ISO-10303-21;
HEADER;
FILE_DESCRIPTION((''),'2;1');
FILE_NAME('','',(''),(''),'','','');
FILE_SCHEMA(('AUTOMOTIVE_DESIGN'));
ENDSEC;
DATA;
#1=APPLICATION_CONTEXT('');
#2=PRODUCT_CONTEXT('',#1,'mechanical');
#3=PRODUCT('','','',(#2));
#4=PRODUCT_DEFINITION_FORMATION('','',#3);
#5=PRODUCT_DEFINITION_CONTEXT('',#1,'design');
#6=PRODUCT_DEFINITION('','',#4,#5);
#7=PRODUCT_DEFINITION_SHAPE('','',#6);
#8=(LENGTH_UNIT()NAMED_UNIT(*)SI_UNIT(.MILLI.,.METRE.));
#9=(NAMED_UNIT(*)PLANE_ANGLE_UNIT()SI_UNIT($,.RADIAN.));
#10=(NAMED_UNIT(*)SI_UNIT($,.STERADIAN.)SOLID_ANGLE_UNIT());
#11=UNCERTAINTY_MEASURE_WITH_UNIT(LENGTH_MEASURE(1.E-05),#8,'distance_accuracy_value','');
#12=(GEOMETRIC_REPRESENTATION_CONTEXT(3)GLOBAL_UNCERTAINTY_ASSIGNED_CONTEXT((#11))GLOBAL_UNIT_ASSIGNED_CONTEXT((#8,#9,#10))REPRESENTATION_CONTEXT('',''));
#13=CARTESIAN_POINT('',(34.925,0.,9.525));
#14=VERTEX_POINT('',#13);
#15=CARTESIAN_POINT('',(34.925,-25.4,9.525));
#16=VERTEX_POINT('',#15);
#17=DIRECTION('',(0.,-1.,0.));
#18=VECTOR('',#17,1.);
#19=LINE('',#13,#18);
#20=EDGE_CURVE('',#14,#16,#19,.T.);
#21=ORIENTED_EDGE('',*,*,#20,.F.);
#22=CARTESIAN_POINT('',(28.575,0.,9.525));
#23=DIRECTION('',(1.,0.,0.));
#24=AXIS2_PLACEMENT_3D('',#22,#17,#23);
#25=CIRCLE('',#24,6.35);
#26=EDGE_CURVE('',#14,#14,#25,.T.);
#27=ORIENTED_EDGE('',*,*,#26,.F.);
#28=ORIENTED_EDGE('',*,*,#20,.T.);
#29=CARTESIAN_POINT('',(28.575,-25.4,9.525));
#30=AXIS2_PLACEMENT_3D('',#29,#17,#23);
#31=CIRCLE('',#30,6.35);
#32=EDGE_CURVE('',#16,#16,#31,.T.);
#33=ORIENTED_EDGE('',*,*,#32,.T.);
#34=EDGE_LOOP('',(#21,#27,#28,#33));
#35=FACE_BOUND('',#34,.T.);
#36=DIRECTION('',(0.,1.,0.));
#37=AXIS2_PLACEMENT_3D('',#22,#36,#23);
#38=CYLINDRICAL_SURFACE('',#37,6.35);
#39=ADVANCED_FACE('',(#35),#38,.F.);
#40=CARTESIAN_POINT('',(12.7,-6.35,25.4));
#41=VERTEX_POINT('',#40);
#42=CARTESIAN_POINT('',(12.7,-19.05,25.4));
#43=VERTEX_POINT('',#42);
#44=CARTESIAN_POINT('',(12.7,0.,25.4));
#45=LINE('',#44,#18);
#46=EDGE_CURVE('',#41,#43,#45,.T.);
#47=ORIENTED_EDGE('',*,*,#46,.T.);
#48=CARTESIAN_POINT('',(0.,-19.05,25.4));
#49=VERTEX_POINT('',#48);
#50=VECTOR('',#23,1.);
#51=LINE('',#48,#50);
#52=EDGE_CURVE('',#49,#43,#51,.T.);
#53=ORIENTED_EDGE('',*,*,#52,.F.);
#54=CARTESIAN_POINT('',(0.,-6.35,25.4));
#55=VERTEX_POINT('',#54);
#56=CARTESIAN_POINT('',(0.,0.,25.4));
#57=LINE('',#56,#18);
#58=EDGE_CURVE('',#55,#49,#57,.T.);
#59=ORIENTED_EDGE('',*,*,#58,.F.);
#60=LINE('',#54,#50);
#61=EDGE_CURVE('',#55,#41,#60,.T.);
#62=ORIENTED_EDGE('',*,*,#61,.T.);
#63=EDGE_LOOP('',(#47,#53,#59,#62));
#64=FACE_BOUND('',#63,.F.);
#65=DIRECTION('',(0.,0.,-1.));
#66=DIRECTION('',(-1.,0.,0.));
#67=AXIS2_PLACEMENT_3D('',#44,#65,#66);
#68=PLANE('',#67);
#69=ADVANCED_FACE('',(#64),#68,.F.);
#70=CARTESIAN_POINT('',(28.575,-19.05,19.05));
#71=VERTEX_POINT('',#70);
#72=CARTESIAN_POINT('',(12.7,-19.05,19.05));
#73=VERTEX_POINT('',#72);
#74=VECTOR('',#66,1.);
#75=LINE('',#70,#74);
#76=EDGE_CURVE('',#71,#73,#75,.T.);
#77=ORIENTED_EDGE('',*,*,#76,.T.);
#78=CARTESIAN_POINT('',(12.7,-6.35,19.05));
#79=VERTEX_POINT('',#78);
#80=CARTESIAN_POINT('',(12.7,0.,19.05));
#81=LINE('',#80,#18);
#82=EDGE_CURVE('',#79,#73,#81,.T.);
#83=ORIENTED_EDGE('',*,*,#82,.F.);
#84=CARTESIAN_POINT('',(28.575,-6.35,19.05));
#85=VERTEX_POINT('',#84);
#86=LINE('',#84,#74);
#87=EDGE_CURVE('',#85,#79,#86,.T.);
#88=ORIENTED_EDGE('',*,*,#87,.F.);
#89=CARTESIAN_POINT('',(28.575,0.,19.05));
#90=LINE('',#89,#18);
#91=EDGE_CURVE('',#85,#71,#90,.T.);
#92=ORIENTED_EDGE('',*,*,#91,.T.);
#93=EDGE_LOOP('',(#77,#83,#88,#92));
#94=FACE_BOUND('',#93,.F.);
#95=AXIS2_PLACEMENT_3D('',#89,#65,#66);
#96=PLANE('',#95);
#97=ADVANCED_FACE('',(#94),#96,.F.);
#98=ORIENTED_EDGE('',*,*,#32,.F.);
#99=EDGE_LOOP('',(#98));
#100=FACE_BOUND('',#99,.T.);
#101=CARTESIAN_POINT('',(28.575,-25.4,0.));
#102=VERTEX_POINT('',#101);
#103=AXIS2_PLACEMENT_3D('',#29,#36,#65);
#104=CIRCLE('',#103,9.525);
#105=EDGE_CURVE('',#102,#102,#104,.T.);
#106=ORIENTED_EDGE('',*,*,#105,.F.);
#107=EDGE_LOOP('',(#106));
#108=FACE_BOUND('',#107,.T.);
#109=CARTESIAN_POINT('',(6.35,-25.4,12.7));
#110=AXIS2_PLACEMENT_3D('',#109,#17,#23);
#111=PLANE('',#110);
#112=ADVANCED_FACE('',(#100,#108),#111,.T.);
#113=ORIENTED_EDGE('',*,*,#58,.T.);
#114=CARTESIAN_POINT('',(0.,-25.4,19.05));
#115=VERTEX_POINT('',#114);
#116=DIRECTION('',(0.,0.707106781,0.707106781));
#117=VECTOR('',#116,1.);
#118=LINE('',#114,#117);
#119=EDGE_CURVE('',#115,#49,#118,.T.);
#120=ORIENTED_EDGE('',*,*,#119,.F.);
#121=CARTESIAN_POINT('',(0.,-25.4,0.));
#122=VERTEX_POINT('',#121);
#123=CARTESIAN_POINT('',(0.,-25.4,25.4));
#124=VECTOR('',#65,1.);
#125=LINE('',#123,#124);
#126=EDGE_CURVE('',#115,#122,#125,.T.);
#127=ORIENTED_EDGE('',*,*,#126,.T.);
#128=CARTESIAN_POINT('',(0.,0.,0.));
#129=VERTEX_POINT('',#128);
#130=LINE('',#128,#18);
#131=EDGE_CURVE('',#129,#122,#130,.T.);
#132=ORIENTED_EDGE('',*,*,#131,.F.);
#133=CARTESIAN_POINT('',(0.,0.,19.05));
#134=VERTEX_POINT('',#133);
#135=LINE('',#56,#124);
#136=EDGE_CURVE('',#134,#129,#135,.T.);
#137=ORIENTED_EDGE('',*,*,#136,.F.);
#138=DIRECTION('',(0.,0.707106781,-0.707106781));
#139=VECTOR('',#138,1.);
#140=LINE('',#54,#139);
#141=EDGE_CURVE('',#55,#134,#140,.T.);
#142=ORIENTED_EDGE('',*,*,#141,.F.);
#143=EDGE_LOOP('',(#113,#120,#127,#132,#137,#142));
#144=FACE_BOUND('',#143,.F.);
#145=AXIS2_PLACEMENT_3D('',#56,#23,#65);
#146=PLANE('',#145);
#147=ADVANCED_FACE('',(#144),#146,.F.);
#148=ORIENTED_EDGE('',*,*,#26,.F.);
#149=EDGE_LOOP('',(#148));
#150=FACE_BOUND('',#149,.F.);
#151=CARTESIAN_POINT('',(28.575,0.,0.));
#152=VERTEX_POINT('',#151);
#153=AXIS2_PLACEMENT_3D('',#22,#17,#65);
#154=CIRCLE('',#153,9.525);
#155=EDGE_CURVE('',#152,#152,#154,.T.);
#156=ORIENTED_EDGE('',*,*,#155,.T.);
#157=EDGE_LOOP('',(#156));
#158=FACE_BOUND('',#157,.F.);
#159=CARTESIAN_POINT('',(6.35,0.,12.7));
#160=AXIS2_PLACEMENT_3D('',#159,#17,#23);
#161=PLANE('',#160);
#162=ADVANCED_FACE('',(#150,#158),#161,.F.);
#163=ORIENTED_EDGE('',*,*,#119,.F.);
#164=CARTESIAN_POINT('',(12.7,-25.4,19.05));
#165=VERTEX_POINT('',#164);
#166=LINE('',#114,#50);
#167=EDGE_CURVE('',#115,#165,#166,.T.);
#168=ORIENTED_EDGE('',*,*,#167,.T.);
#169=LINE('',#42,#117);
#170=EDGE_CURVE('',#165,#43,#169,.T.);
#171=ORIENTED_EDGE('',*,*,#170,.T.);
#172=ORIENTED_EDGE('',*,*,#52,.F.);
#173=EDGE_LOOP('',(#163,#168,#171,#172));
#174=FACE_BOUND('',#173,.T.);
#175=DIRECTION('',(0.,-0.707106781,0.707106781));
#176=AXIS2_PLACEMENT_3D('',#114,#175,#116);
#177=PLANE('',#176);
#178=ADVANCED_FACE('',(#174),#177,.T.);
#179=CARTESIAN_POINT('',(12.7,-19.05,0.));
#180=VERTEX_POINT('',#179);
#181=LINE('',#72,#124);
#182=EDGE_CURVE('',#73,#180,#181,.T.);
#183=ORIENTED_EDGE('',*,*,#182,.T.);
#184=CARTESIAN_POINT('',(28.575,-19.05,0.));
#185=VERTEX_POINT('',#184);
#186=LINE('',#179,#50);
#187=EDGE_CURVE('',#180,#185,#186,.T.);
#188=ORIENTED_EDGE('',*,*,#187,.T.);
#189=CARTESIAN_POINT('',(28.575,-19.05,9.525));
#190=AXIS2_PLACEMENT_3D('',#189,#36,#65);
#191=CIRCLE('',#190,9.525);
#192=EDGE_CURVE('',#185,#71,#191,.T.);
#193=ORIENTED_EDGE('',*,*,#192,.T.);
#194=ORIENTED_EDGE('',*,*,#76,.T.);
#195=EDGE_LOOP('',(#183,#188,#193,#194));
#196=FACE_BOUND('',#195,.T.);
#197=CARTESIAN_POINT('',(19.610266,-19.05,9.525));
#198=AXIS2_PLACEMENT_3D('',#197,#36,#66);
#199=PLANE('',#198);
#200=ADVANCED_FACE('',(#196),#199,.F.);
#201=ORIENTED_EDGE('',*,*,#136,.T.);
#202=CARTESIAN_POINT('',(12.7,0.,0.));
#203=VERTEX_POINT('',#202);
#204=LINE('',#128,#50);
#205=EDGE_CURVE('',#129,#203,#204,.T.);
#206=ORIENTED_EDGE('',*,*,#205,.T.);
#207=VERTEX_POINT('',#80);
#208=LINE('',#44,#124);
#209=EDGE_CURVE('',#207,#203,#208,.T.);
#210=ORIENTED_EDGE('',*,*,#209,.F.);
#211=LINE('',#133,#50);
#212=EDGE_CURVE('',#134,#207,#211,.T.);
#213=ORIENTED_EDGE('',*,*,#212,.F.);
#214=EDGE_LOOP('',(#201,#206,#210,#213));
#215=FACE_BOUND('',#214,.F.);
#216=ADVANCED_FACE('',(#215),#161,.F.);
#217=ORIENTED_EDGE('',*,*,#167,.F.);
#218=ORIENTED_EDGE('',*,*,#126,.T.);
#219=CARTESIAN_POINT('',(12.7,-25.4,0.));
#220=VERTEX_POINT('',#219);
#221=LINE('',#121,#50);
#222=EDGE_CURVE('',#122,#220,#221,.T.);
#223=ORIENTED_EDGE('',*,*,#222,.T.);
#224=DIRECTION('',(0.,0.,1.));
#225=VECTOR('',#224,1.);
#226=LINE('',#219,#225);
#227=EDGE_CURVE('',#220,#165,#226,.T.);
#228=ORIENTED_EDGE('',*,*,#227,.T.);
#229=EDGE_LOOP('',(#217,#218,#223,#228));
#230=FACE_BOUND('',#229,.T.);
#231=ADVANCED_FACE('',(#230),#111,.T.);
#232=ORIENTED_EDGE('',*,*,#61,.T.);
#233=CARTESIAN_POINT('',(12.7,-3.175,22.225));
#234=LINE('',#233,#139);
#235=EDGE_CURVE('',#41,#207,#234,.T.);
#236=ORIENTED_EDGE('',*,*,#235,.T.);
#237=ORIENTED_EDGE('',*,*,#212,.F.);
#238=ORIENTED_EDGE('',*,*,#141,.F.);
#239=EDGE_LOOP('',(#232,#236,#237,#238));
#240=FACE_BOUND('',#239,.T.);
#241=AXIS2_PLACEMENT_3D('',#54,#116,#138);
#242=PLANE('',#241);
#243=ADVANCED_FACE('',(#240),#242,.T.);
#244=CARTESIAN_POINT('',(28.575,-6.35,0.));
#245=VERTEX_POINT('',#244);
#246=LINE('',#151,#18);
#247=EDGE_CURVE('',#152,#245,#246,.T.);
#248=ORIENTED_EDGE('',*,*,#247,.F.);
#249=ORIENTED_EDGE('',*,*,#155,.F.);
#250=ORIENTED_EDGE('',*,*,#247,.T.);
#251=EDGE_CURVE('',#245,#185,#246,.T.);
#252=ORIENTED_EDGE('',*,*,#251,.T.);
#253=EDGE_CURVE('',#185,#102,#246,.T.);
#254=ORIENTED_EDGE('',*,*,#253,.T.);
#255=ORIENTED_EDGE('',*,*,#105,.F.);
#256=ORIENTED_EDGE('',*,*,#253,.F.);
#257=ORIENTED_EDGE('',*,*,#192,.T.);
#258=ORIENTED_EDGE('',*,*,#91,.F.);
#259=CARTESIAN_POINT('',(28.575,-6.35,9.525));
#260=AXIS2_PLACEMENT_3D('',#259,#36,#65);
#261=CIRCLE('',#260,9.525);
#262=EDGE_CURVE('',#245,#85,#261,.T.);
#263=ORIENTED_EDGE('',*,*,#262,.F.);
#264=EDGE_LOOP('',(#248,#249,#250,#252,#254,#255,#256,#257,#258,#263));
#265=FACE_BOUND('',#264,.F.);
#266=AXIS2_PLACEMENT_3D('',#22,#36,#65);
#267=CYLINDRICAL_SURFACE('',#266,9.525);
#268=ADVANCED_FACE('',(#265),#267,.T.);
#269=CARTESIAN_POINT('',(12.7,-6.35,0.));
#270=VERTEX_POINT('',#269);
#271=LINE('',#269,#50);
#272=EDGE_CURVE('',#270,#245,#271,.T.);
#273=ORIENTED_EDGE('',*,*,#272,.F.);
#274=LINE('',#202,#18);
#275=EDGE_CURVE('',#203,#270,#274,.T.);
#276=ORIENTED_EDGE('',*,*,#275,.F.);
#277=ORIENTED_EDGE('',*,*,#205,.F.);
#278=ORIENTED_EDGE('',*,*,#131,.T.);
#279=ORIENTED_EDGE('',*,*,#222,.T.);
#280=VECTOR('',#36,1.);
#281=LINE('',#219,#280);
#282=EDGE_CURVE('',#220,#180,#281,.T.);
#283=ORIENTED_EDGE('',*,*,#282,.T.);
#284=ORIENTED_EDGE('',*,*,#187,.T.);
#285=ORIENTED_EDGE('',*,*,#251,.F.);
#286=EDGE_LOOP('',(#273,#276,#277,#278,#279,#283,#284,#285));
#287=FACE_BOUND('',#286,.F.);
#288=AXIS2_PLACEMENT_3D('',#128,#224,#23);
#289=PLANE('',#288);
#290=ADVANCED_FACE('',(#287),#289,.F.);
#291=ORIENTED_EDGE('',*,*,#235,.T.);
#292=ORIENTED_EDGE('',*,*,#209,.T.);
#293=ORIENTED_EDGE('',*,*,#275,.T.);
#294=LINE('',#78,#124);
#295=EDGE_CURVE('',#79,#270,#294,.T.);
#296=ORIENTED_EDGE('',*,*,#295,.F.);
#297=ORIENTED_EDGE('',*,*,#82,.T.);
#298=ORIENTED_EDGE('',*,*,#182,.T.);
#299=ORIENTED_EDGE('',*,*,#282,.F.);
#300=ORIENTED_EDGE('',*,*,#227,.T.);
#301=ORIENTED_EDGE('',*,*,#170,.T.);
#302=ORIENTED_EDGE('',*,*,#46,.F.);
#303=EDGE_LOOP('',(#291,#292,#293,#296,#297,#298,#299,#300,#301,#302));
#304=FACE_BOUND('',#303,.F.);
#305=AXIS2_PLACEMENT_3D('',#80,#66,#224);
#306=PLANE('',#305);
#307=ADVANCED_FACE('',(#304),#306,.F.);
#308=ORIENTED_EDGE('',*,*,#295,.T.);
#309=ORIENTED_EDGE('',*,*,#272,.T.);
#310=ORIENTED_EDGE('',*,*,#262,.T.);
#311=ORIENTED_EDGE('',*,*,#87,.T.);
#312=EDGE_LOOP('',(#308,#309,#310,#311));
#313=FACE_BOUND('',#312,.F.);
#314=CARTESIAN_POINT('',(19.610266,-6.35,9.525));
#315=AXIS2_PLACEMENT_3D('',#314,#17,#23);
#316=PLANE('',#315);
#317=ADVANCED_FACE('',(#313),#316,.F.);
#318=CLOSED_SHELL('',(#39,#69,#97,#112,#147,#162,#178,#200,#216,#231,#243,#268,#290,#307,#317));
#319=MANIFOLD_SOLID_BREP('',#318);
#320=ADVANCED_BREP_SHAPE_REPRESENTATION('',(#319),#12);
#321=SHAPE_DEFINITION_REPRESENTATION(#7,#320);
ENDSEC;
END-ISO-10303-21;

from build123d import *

# Parameters (mm, degrees)
F0_R     = 6.35
F1_DEPTH = 25.4
F3_DEPTH = 6.35
F5_DEPTH = 6.35
F7_DEPTH = 25.4
F9_DEPTH = 25.4


# Not quite as in the source:
# - a pattern or mirror of a feature is missing from the dataset's text; its kind, count and spacing are read off the source's solid
# - a feature names something its author has since deleted; it is built from what else it names


with BuildPart() as f1:
    # F0 (on Front) → F1 (new body)
    with BuildSketch(Plane.XZ):
        Polygon((0, 25.4), (0, 0), (12.7, 0), (12.7, 19.05), (12.7, 25.4), align=None)
        with BuildLine():
            Line((12.7, 19.05), (12.7, 0))
            Line((12.7, 0), (28.575, 0))
            ThreePointArc((28.575, 0), (19.05, 9.525), (28.575, 19.05))
            Line((28.575, 19.05), (12.7, 19.05))
        make_face()
        with BuildLine():
            ThreePointArc((28.575, 19.05), (19.05, 9.525), (28.575, 0))
            ThreePointArc((28.575, 0), (35.3101920908, 2.7898079092), (38.1, 9.525))
            ThreePointArc((38.1, 9.525), (35.3101920908, 16.2601920908), (28.575, 19.05))
        make_face()
        with Locations((28.575, 9.525)):
            Circle(F0_R, mode=Mode.SUBTRACT)
    extrude(amount=F1_DEPTH)

    # F2 (on face) → F3 (cut)
    with BuildSketch(Plane.XZ):
        with BuildLine():
            Line((28.575, 19.05), (12.7, 19.05))
            Line((12.7, 19.05), (12.7, 0))
            Line((12.7, 0), (28.575, 0))
            ThreePointArc((28.575, 0), (19.05, 9.525), (28.575, 19.05))
        make_face()
    extrude(amount=-F3_DEPTH, mode=Mode.SUBTRACT)

    # F4 (on Front) → F5 (cut)
    with BuildSketch(Plane.XZ):
        with BuildLine():
            Line((28.575, 19.05), (12.7, 19.05))
            Line((12.7, 19.05), (12.7, 0))
            Line((12.7, 0), (28.575, 0))
            ThreePointArc((28.575, 0), (19.05, 9.525), (28.575, 19.05))
        make_face()
    f5 = extrude(amount=F5_DEPTH, mode=Mode.SUBTRACT)

    # F5_copies: F5 across plane
    add(f5.mirror(Plane(origin=(0, -12.7, 0), x_dir=(0, 0, -1), z_dir=(0, -1, 0))), mode=Mode.SUBTRACT)

    # F6 (on Right) → F7 (cut)
    with BuildSketch(Plane.YZ):
        Polygon((-25.4, 19.05), (-19.05, 25.4), (-25.4, 25.4), align=None)
    extrude(amount=F7_DEPTH, mode=Mode.SUBTRACT)

    # F8 (on Right) → F9 (cut)
    with BuildSketch(Plane.YZ):
        Polygon((0, 19.05), (0, 25.4), (-6.35, 25.4), align=None)
    extrude(amount=F9_DEPTH, mode=Mode.SUBTRACT)


solid = f1.part
